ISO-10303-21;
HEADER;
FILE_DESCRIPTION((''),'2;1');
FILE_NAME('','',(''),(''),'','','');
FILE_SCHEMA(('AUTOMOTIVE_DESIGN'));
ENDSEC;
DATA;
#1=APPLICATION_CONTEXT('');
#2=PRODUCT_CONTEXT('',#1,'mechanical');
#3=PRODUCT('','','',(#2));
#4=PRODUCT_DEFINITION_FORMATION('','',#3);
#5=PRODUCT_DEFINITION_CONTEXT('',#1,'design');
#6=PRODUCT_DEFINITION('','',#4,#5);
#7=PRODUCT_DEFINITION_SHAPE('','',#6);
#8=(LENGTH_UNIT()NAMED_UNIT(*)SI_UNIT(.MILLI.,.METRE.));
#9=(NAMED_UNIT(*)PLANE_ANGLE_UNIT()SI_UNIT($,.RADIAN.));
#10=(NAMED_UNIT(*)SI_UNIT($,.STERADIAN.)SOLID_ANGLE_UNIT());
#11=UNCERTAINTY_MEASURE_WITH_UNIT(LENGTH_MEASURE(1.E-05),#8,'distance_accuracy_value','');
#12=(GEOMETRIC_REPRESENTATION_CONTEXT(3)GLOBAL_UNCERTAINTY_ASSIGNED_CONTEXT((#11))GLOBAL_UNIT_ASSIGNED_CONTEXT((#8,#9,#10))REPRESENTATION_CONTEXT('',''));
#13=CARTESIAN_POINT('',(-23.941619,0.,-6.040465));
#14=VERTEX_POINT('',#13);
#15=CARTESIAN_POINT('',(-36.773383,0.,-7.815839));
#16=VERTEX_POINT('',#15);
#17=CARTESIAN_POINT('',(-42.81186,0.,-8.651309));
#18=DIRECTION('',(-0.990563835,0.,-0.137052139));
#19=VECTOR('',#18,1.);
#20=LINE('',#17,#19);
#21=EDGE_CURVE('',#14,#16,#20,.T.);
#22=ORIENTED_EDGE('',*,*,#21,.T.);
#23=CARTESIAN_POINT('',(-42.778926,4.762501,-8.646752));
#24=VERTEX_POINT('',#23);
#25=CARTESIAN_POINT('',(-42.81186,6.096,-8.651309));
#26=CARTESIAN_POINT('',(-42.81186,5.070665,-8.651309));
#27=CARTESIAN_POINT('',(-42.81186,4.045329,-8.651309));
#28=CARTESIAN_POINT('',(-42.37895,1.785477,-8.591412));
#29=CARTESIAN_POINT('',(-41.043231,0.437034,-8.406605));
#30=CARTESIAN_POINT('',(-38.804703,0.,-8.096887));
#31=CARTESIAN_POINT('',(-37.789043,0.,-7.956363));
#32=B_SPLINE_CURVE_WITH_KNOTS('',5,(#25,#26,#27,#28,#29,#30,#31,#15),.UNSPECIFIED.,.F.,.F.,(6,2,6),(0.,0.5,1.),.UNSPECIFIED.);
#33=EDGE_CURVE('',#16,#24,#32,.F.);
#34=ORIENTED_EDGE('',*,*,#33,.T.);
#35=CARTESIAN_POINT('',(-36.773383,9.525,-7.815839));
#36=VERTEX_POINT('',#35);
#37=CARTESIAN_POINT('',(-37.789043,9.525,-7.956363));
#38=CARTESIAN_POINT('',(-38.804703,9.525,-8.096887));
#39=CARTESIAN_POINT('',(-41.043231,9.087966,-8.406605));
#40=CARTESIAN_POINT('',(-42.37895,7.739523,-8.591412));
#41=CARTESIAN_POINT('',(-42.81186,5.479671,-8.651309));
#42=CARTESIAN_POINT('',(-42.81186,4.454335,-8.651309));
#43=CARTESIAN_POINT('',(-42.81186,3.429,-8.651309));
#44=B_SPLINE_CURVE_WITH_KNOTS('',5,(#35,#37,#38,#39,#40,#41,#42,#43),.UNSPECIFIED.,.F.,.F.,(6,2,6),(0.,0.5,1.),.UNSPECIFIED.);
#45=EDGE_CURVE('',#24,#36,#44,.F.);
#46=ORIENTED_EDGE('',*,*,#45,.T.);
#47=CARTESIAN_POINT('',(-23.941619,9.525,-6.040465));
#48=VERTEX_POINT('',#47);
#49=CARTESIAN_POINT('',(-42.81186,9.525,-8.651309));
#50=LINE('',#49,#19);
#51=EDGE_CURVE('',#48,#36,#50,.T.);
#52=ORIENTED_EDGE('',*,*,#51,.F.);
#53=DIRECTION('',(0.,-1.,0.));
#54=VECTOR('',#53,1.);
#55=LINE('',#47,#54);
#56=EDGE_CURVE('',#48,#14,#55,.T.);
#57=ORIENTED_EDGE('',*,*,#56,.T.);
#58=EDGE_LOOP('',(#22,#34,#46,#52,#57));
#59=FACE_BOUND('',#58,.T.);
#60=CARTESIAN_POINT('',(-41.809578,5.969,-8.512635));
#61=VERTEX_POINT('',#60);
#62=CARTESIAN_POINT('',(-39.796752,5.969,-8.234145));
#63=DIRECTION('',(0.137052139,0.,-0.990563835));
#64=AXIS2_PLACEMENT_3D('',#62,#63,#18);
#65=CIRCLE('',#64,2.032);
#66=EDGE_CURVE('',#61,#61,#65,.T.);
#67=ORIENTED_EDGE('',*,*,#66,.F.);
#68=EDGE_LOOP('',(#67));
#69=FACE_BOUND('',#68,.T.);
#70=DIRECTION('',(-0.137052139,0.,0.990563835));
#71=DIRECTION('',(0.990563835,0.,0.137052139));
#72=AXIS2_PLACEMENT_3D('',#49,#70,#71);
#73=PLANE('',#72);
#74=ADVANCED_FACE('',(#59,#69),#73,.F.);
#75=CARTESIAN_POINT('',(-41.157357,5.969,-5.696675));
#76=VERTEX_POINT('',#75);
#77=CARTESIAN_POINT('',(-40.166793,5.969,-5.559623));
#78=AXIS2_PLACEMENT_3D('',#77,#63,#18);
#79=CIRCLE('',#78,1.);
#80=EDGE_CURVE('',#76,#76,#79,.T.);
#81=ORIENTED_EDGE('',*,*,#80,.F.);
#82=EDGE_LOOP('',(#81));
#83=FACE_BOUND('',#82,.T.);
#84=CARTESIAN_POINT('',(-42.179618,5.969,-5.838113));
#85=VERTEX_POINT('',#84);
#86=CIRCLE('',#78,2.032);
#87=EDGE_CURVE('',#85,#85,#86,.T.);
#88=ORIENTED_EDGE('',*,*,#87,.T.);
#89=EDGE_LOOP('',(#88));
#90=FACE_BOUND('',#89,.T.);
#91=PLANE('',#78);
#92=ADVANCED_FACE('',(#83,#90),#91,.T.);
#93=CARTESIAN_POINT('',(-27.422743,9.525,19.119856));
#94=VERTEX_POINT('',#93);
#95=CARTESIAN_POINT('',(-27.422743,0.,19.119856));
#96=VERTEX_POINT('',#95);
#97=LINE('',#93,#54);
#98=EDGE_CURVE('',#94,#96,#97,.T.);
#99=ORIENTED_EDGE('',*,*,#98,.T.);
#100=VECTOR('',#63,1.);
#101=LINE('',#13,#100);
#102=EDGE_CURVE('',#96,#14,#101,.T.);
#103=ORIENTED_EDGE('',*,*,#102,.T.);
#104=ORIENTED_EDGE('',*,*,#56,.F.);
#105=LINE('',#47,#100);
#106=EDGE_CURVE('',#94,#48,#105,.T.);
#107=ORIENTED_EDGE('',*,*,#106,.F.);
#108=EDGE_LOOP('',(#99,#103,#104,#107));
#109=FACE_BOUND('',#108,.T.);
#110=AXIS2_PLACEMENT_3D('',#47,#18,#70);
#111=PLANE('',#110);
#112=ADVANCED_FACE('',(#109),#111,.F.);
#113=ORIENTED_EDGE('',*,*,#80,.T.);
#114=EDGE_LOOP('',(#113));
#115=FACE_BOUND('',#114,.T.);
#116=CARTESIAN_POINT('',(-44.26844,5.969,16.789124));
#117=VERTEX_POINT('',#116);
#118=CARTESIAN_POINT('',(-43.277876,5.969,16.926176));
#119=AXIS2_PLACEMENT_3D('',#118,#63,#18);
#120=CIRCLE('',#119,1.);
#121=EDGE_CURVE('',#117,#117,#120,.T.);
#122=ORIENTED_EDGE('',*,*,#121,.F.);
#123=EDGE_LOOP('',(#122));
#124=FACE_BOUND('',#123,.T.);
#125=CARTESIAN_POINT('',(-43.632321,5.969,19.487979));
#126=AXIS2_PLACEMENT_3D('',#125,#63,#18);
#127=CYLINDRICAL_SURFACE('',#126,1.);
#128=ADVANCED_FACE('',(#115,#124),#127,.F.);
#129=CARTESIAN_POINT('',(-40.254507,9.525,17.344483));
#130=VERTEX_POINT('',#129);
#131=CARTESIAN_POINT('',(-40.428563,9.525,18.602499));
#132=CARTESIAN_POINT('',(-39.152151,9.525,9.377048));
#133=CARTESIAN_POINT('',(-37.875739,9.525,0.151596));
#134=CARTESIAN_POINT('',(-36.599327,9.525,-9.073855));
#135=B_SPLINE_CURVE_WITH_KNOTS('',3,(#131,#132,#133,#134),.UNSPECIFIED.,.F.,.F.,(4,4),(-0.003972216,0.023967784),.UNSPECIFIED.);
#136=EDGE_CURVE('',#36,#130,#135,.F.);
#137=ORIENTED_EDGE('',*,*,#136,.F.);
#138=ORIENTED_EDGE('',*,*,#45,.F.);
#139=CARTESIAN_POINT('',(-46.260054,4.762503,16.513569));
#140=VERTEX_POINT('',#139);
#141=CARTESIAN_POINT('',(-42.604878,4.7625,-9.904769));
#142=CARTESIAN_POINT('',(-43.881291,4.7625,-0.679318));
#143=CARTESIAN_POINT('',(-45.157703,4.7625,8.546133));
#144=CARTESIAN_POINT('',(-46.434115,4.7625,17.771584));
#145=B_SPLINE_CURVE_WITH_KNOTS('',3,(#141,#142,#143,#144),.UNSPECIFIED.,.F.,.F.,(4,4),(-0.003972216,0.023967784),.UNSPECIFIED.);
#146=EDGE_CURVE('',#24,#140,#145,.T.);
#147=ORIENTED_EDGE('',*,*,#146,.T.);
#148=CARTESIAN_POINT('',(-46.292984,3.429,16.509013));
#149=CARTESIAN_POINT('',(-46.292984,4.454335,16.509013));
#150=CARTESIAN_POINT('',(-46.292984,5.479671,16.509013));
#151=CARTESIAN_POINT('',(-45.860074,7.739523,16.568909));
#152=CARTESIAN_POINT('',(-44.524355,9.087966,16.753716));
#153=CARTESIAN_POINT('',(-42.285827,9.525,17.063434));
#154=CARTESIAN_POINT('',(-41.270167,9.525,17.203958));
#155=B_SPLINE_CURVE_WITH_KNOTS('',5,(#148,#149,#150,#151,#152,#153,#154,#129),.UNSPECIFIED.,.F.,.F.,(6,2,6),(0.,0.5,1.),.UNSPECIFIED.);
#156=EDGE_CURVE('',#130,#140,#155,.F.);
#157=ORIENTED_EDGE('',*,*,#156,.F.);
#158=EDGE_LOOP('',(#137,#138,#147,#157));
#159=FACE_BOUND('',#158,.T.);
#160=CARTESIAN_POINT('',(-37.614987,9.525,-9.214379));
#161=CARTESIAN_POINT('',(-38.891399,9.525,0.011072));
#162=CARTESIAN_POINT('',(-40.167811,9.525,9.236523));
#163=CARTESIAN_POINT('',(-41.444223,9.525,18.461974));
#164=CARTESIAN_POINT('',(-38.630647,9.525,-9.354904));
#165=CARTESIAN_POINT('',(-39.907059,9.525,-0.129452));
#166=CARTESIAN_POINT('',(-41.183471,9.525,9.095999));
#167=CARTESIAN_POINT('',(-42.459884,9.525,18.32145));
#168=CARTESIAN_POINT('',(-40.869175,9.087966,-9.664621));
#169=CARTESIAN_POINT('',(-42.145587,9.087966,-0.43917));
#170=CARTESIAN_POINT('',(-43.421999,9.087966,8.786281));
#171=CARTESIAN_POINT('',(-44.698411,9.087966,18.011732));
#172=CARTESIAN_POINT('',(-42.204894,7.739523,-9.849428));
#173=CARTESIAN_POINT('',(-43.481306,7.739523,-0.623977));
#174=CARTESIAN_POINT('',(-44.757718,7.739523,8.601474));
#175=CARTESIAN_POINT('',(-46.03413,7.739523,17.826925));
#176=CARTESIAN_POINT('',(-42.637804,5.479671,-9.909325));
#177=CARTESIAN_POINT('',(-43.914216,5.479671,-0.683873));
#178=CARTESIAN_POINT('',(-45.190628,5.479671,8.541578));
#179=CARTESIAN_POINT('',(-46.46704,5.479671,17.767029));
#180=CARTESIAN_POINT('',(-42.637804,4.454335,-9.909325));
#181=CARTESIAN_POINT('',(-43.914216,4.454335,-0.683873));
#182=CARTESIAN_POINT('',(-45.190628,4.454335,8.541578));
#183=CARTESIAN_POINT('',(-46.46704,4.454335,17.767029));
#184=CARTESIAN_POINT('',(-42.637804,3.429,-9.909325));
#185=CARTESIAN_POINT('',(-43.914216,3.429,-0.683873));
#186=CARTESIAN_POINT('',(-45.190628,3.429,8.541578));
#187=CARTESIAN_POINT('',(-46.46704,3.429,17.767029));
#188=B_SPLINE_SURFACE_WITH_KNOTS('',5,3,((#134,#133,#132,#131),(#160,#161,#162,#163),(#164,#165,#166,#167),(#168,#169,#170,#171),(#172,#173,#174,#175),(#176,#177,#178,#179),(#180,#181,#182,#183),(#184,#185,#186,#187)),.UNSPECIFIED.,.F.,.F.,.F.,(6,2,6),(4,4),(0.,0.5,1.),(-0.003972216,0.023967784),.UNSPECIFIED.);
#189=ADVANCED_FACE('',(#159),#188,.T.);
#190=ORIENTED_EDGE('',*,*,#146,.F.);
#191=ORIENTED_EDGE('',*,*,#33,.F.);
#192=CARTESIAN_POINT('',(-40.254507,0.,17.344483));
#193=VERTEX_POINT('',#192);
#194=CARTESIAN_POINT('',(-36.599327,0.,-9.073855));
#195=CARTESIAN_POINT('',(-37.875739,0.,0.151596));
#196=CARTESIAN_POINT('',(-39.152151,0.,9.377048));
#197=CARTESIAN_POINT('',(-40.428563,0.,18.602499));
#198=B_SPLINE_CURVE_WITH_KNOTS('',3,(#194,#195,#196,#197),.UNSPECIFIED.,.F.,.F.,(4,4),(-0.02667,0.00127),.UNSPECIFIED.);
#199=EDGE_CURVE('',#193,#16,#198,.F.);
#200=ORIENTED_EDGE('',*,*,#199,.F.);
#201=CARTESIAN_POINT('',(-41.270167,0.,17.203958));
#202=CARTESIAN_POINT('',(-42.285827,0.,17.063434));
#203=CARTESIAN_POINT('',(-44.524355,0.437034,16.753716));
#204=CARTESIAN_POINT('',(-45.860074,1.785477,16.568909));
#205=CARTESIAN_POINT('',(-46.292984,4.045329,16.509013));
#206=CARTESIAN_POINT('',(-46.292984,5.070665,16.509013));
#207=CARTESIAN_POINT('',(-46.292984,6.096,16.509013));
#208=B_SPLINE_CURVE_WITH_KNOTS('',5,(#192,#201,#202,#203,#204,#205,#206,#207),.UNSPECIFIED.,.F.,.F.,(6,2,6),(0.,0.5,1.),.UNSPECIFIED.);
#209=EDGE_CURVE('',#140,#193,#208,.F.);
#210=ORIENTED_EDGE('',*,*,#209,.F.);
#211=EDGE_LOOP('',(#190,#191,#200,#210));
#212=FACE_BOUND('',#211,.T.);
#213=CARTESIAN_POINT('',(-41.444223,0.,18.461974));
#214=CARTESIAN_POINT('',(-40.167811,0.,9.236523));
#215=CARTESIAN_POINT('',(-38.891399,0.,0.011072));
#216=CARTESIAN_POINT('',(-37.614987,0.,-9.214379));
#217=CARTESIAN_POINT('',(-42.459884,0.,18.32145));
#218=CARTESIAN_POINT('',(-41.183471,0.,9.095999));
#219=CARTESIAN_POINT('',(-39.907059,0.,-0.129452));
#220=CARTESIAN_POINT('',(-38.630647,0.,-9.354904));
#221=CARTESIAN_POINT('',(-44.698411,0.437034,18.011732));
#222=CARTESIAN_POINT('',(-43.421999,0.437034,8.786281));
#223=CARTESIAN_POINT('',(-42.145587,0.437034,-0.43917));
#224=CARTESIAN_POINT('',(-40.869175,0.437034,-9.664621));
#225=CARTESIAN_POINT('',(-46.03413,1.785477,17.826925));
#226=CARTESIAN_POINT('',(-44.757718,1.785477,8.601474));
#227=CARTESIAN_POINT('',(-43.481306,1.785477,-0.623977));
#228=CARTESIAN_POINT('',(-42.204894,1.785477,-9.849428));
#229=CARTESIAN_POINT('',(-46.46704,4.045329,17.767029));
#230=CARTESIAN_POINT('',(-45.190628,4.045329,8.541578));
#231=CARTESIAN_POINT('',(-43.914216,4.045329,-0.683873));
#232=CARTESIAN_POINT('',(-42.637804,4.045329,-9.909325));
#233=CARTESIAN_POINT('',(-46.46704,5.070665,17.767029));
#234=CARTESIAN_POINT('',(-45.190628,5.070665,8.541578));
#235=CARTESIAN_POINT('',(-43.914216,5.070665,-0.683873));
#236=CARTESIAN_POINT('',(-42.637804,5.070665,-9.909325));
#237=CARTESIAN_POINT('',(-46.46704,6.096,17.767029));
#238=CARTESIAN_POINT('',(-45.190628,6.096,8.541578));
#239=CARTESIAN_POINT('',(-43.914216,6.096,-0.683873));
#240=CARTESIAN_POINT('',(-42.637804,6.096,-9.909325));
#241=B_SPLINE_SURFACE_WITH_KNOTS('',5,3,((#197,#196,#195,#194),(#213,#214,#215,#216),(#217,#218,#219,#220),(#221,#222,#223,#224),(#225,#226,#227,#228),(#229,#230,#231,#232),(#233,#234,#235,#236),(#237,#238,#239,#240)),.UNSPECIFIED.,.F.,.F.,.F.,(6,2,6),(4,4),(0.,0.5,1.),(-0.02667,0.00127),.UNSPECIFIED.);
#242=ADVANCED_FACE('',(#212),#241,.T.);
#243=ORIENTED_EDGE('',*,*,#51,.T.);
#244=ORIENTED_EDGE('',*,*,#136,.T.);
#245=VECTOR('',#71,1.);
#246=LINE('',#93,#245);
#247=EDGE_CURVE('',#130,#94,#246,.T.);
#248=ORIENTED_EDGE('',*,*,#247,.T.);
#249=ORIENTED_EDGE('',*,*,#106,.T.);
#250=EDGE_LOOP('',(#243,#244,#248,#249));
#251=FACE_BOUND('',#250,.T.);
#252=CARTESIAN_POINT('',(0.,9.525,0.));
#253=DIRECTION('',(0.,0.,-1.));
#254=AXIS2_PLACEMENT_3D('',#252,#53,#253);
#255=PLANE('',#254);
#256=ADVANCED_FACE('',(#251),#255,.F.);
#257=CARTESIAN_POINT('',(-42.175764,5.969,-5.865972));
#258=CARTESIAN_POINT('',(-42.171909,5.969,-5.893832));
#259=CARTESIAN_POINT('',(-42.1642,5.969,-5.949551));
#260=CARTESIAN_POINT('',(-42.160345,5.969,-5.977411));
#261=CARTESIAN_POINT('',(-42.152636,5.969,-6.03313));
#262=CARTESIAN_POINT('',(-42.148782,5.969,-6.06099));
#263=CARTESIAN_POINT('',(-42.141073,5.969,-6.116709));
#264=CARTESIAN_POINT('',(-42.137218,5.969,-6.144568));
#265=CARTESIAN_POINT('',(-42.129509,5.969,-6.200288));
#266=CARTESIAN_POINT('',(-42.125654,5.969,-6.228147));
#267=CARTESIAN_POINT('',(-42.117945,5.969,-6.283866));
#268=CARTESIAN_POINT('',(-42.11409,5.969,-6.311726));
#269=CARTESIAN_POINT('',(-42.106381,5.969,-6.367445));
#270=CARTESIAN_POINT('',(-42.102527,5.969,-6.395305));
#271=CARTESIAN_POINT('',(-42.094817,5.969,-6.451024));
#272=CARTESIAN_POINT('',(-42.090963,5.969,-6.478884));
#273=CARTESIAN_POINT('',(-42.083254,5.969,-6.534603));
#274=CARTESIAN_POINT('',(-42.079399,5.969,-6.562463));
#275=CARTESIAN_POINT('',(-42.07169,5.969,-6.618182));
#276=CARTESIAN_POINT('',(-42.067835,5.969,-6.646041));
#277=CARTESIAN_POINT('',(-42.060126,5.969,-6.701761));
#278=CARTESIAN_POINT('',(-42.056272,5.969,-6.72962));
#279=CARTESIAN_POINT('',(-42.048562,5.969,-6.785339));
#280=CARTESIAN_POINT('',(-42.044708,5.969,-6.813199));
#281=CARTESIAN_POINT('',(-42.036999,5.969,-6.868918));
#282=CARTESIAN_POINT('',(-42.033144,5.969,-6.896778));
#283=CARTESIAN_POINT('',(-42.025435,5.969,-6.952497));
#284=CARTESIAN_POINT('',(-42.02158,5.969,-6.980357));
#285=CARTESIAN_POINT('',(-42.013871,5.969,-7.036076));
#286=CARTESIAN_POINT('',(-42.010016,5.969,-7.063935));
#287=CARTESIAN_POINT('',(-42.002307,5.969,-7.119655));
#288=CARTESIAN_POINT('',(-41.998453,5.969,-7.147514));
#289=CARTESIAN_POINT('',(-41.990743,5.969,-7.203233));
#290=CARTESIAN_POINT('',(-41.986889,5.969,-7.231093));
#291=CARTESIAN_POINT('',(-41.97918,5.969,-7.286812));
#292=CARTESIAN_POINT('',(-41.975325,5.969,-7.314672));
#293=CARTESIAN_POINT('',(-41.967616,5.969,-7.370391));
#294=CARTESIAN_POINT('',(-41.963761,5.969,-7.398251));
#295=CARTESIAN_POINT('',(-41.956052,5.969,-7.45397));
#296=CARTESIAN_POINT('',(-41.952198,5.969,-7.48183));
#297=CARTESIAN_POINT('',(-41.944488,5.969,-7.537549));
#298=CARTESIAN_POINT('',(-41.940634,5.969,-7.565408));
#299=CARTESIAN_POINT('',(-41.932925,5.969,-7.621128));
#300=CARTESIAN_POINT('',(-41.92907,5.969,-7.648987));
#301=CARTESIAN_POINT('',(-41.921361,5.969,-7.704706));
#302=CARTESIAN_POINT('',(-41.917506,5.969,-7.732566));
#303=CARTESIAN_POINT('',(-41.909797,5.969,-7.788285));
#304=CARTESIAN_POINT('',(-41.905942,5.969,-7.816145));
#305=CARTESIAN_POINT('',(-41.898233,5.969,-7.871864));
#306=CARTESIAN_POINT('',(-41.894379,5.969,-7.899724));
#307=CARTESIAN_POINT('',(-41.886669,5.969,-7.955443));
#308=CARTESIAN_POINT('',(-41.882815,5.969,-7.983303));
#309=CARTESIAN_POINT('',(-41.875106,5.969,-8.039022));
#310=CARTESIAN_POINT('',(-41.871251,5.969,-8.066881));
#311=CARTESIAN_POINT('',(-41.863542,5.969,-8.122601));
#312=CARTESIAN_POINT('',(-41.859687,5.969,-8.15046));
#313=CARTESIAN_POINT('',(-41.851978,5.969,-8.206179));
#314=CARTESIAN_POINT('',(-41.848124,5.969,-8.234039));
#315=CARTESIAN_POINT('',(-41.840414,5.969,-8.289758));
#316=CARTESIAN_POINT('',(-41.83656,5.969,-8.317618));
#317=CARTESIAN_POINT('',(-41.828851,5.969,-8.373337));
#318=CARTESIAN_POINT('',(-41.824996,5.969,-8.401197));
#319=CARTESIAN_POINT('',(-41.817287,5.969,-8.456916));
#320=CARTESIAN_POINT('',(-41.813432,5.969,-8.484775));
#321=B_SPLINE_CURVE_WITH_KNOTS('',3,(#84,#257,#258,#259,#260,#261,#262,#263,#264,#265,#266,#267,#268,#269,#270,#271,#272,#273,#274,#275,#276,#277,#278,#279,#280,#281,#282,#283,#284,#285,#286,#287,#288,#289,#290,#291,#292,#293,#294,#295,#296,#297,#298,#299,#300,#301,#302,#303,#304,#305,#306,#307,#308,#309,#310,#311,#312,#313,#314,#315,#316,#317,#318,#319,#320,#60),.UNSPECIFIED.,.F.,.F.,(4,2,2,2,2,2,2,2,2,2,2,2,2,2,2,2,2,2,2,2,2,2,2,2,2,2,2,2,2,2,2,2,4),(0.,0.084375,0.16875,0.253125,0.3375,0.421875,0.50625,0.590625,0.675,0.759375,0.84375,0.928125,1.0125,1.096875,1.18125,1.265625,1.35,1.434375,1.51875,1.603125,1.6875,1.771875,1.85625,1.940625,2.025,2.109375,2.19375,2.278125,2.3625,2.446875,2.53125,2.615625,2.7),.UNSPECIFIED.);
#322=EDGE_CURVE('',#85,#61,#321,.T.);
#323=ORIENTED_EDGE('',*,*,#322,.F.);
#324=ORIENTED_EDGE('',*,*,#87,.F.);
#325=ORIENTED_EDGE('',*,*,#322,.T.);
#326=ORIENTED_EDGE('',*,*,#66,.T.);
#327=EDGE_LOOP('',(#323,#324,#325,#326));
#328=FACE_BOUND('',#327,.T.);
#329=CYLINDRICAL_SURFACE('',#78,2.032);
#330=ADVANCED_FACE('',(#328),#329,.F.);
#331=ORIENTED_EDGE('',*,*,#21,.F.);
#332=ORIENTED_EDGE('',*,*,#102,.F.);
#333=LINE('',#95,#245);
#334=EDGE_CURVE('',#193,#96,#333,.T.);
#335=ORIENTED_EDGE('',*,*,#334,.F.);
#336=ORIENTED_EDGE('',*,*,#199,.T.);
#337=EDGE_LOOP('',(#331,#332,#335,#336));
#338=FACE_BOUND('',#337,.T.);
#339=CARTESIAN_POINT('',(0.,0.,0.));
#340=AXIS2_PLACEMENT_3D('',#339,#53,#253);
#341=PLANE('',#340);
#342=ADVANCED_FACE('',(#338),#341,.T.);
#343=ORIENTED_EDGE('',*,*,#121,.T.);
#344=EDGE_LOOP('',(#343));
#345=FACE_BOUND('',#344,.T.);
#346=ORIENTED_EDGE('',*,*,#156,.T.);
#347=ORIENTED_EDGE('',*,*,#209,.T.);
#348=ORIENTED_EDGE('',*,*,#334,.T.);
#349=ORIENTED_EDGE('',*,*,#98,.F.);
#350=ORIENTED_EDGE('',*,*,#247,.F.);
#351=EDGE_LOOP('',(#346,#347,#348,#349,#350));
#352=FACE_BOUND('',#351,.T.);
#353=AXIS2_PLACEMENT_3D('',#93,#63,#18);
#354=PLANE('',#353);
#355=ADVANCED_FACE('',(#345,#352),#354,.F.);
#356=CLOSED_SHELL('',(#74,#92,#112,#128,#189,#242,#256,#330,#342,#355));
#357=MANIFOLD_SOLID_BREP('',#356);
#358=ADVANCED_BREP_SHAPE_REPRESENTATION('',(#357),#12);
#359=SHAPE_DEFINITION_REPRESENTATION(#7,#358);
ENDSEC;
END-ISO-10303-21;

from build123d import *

# Parameters (mm, degrees)
BOSS_EXTRUDE1_DEPTH = 9.525
SKETCH3_R           = 2.032
CUT_EXTRUDE1_DEPTH  = 2.7
SKETCH4_R           = 1.000000032
CUT_EXTRUDE2_DEPTH  = 51.984772229
FILLET2_SIZE        = 6.096


with BuildPart() as part:
    # Sketch1 → Boss-Extrude1 (new body)
    with BuildSketch(Plane(origin=(0, 0, 0), x_dir=(1, 0, 0), z_dir=(0, 1, 0))):
        Polygon((-27.422743224, -19.119856123), (-46.29298428, -16.509012872), (-42.811859946, 8.651308536), (-23.941618889, 6.040465285), align=None)
    extrude(amount=BOSS_EXTRUDE1_DEPTH)

    # Sketch3 → Cut-Extrude1 (cut)
    with BuildSketch(Plane(origin=(0.316670388, 0, -2.684144047), x_dir=(-0.9905638349724136, 0, -0.13705213914691383), z_dir=(0.13705213914691383, 0, -0.9905638349724136))):
        with Locations((40.495544979, 5.969)):
            Circle(SKETCH3_R)
    extrude(amount=-CUT_EXTRUDE1_DEPTH, mode=Mode.SUBTRACT)

    # Sketch4 → Cut-Extrude2 (cut, through all)
    with BuildSketch(Plane(origin=(0.000303759, 0, -0.00219546), x_dir=(-0.9905638349724136, 0, -0.13705213914691383), z_dir=(0.1370521391469138, 0, -0.9905638349724135))):
        with Locations((40.549730429, 5.969)):
            Circle(SKETCH4_R)
    extrude(amount=-CUT_EXTRUDE2_DEPTH, mode=Mode.SUBTRACT)

    # Fillet2
    # a fillet whose section is not a circle: 6.096 mm, written as the material it takes off along each edge
    with BuildSketch(Plane(origin=(-48.38165888, 0, 31.605205717), x_dir=(0.9905638349724136, 0, 0.13705213914691353), z_dir=(0.13705213914691353, 0, -0.9905638349724136))) as fillet2_piece_1:
        with BuildLine():
            add(Edge.make_bspline([(FILLET2_SIZE, 0), (FILLET2_SIZE * 0.831801948466, 0), (FILLET2_SIZE * 0.663603896932, 0), (FILLET2_SIZE * 0.292893218813, -FILLET2_SIZE * 0.0716919198361), (FILLET2_SIZE * 0.0716919198361, -FILLET2_SIZE * 0.292893218813), (0, -FILLET2_SIZE * 0.663603896932), (0, -FILLET2_SIZE * 0.831801948466), (0, -FILLET2_SIZE)], knots=[0, 0, 0, 0, 0, 0, 0.5, 0.5, 1, 1, 1, 1, 1, 1], degree=5))
            Line((0, -FILLET2_SIZE), (0, 0))
            Line((0, 0), (FILLET2_SIZE, 0))
        make_face()
    extrude(amount=55.88, mode=Mode.SUBTRACT)
    with BuildSketch(Plane(origin=(-48.38165888, 9.525, 31.605205717), x_dir=(0.9905638349724136, 0, 0.13705213914691353), z_dir=(0.13705213914691353, 0, -0.9905638349724136))) as fillet2_piece_2:
        with BuildLine():
            add(Edge.make_bspline([(FILLET2_SIZE, 0), (FILLET2_SIZE * 0.831801948466, 0), (FILLET2_SIZE * 0.663603896932, 0), (FILLET2_SIZE * 0.292893218813, FILLET2_SIZE * 0.0716919198361), (FILLET2_SIZE * 0.0716919198361, FILLET2_SIZE * 0.292893218813), (0, FILLET2_SIZE * 0.663603896932), (0, FILLET2_SIZE * 0.831801948466), (0, FILLET2_SIZE)], knots=[0, 0, 0, 0, 0, 0, 0.5, 0.5, 1, 1, 1, 1, 1, 1], degree=5))
            Line((0, FILLET2_SIZE), (0, 0))
            Line((0, 0), (FILLET2_SIZE, 0))
        make_face()
    extrude(amount=55.88, mode=Mode.SUBTRACT)


solid = part.part
